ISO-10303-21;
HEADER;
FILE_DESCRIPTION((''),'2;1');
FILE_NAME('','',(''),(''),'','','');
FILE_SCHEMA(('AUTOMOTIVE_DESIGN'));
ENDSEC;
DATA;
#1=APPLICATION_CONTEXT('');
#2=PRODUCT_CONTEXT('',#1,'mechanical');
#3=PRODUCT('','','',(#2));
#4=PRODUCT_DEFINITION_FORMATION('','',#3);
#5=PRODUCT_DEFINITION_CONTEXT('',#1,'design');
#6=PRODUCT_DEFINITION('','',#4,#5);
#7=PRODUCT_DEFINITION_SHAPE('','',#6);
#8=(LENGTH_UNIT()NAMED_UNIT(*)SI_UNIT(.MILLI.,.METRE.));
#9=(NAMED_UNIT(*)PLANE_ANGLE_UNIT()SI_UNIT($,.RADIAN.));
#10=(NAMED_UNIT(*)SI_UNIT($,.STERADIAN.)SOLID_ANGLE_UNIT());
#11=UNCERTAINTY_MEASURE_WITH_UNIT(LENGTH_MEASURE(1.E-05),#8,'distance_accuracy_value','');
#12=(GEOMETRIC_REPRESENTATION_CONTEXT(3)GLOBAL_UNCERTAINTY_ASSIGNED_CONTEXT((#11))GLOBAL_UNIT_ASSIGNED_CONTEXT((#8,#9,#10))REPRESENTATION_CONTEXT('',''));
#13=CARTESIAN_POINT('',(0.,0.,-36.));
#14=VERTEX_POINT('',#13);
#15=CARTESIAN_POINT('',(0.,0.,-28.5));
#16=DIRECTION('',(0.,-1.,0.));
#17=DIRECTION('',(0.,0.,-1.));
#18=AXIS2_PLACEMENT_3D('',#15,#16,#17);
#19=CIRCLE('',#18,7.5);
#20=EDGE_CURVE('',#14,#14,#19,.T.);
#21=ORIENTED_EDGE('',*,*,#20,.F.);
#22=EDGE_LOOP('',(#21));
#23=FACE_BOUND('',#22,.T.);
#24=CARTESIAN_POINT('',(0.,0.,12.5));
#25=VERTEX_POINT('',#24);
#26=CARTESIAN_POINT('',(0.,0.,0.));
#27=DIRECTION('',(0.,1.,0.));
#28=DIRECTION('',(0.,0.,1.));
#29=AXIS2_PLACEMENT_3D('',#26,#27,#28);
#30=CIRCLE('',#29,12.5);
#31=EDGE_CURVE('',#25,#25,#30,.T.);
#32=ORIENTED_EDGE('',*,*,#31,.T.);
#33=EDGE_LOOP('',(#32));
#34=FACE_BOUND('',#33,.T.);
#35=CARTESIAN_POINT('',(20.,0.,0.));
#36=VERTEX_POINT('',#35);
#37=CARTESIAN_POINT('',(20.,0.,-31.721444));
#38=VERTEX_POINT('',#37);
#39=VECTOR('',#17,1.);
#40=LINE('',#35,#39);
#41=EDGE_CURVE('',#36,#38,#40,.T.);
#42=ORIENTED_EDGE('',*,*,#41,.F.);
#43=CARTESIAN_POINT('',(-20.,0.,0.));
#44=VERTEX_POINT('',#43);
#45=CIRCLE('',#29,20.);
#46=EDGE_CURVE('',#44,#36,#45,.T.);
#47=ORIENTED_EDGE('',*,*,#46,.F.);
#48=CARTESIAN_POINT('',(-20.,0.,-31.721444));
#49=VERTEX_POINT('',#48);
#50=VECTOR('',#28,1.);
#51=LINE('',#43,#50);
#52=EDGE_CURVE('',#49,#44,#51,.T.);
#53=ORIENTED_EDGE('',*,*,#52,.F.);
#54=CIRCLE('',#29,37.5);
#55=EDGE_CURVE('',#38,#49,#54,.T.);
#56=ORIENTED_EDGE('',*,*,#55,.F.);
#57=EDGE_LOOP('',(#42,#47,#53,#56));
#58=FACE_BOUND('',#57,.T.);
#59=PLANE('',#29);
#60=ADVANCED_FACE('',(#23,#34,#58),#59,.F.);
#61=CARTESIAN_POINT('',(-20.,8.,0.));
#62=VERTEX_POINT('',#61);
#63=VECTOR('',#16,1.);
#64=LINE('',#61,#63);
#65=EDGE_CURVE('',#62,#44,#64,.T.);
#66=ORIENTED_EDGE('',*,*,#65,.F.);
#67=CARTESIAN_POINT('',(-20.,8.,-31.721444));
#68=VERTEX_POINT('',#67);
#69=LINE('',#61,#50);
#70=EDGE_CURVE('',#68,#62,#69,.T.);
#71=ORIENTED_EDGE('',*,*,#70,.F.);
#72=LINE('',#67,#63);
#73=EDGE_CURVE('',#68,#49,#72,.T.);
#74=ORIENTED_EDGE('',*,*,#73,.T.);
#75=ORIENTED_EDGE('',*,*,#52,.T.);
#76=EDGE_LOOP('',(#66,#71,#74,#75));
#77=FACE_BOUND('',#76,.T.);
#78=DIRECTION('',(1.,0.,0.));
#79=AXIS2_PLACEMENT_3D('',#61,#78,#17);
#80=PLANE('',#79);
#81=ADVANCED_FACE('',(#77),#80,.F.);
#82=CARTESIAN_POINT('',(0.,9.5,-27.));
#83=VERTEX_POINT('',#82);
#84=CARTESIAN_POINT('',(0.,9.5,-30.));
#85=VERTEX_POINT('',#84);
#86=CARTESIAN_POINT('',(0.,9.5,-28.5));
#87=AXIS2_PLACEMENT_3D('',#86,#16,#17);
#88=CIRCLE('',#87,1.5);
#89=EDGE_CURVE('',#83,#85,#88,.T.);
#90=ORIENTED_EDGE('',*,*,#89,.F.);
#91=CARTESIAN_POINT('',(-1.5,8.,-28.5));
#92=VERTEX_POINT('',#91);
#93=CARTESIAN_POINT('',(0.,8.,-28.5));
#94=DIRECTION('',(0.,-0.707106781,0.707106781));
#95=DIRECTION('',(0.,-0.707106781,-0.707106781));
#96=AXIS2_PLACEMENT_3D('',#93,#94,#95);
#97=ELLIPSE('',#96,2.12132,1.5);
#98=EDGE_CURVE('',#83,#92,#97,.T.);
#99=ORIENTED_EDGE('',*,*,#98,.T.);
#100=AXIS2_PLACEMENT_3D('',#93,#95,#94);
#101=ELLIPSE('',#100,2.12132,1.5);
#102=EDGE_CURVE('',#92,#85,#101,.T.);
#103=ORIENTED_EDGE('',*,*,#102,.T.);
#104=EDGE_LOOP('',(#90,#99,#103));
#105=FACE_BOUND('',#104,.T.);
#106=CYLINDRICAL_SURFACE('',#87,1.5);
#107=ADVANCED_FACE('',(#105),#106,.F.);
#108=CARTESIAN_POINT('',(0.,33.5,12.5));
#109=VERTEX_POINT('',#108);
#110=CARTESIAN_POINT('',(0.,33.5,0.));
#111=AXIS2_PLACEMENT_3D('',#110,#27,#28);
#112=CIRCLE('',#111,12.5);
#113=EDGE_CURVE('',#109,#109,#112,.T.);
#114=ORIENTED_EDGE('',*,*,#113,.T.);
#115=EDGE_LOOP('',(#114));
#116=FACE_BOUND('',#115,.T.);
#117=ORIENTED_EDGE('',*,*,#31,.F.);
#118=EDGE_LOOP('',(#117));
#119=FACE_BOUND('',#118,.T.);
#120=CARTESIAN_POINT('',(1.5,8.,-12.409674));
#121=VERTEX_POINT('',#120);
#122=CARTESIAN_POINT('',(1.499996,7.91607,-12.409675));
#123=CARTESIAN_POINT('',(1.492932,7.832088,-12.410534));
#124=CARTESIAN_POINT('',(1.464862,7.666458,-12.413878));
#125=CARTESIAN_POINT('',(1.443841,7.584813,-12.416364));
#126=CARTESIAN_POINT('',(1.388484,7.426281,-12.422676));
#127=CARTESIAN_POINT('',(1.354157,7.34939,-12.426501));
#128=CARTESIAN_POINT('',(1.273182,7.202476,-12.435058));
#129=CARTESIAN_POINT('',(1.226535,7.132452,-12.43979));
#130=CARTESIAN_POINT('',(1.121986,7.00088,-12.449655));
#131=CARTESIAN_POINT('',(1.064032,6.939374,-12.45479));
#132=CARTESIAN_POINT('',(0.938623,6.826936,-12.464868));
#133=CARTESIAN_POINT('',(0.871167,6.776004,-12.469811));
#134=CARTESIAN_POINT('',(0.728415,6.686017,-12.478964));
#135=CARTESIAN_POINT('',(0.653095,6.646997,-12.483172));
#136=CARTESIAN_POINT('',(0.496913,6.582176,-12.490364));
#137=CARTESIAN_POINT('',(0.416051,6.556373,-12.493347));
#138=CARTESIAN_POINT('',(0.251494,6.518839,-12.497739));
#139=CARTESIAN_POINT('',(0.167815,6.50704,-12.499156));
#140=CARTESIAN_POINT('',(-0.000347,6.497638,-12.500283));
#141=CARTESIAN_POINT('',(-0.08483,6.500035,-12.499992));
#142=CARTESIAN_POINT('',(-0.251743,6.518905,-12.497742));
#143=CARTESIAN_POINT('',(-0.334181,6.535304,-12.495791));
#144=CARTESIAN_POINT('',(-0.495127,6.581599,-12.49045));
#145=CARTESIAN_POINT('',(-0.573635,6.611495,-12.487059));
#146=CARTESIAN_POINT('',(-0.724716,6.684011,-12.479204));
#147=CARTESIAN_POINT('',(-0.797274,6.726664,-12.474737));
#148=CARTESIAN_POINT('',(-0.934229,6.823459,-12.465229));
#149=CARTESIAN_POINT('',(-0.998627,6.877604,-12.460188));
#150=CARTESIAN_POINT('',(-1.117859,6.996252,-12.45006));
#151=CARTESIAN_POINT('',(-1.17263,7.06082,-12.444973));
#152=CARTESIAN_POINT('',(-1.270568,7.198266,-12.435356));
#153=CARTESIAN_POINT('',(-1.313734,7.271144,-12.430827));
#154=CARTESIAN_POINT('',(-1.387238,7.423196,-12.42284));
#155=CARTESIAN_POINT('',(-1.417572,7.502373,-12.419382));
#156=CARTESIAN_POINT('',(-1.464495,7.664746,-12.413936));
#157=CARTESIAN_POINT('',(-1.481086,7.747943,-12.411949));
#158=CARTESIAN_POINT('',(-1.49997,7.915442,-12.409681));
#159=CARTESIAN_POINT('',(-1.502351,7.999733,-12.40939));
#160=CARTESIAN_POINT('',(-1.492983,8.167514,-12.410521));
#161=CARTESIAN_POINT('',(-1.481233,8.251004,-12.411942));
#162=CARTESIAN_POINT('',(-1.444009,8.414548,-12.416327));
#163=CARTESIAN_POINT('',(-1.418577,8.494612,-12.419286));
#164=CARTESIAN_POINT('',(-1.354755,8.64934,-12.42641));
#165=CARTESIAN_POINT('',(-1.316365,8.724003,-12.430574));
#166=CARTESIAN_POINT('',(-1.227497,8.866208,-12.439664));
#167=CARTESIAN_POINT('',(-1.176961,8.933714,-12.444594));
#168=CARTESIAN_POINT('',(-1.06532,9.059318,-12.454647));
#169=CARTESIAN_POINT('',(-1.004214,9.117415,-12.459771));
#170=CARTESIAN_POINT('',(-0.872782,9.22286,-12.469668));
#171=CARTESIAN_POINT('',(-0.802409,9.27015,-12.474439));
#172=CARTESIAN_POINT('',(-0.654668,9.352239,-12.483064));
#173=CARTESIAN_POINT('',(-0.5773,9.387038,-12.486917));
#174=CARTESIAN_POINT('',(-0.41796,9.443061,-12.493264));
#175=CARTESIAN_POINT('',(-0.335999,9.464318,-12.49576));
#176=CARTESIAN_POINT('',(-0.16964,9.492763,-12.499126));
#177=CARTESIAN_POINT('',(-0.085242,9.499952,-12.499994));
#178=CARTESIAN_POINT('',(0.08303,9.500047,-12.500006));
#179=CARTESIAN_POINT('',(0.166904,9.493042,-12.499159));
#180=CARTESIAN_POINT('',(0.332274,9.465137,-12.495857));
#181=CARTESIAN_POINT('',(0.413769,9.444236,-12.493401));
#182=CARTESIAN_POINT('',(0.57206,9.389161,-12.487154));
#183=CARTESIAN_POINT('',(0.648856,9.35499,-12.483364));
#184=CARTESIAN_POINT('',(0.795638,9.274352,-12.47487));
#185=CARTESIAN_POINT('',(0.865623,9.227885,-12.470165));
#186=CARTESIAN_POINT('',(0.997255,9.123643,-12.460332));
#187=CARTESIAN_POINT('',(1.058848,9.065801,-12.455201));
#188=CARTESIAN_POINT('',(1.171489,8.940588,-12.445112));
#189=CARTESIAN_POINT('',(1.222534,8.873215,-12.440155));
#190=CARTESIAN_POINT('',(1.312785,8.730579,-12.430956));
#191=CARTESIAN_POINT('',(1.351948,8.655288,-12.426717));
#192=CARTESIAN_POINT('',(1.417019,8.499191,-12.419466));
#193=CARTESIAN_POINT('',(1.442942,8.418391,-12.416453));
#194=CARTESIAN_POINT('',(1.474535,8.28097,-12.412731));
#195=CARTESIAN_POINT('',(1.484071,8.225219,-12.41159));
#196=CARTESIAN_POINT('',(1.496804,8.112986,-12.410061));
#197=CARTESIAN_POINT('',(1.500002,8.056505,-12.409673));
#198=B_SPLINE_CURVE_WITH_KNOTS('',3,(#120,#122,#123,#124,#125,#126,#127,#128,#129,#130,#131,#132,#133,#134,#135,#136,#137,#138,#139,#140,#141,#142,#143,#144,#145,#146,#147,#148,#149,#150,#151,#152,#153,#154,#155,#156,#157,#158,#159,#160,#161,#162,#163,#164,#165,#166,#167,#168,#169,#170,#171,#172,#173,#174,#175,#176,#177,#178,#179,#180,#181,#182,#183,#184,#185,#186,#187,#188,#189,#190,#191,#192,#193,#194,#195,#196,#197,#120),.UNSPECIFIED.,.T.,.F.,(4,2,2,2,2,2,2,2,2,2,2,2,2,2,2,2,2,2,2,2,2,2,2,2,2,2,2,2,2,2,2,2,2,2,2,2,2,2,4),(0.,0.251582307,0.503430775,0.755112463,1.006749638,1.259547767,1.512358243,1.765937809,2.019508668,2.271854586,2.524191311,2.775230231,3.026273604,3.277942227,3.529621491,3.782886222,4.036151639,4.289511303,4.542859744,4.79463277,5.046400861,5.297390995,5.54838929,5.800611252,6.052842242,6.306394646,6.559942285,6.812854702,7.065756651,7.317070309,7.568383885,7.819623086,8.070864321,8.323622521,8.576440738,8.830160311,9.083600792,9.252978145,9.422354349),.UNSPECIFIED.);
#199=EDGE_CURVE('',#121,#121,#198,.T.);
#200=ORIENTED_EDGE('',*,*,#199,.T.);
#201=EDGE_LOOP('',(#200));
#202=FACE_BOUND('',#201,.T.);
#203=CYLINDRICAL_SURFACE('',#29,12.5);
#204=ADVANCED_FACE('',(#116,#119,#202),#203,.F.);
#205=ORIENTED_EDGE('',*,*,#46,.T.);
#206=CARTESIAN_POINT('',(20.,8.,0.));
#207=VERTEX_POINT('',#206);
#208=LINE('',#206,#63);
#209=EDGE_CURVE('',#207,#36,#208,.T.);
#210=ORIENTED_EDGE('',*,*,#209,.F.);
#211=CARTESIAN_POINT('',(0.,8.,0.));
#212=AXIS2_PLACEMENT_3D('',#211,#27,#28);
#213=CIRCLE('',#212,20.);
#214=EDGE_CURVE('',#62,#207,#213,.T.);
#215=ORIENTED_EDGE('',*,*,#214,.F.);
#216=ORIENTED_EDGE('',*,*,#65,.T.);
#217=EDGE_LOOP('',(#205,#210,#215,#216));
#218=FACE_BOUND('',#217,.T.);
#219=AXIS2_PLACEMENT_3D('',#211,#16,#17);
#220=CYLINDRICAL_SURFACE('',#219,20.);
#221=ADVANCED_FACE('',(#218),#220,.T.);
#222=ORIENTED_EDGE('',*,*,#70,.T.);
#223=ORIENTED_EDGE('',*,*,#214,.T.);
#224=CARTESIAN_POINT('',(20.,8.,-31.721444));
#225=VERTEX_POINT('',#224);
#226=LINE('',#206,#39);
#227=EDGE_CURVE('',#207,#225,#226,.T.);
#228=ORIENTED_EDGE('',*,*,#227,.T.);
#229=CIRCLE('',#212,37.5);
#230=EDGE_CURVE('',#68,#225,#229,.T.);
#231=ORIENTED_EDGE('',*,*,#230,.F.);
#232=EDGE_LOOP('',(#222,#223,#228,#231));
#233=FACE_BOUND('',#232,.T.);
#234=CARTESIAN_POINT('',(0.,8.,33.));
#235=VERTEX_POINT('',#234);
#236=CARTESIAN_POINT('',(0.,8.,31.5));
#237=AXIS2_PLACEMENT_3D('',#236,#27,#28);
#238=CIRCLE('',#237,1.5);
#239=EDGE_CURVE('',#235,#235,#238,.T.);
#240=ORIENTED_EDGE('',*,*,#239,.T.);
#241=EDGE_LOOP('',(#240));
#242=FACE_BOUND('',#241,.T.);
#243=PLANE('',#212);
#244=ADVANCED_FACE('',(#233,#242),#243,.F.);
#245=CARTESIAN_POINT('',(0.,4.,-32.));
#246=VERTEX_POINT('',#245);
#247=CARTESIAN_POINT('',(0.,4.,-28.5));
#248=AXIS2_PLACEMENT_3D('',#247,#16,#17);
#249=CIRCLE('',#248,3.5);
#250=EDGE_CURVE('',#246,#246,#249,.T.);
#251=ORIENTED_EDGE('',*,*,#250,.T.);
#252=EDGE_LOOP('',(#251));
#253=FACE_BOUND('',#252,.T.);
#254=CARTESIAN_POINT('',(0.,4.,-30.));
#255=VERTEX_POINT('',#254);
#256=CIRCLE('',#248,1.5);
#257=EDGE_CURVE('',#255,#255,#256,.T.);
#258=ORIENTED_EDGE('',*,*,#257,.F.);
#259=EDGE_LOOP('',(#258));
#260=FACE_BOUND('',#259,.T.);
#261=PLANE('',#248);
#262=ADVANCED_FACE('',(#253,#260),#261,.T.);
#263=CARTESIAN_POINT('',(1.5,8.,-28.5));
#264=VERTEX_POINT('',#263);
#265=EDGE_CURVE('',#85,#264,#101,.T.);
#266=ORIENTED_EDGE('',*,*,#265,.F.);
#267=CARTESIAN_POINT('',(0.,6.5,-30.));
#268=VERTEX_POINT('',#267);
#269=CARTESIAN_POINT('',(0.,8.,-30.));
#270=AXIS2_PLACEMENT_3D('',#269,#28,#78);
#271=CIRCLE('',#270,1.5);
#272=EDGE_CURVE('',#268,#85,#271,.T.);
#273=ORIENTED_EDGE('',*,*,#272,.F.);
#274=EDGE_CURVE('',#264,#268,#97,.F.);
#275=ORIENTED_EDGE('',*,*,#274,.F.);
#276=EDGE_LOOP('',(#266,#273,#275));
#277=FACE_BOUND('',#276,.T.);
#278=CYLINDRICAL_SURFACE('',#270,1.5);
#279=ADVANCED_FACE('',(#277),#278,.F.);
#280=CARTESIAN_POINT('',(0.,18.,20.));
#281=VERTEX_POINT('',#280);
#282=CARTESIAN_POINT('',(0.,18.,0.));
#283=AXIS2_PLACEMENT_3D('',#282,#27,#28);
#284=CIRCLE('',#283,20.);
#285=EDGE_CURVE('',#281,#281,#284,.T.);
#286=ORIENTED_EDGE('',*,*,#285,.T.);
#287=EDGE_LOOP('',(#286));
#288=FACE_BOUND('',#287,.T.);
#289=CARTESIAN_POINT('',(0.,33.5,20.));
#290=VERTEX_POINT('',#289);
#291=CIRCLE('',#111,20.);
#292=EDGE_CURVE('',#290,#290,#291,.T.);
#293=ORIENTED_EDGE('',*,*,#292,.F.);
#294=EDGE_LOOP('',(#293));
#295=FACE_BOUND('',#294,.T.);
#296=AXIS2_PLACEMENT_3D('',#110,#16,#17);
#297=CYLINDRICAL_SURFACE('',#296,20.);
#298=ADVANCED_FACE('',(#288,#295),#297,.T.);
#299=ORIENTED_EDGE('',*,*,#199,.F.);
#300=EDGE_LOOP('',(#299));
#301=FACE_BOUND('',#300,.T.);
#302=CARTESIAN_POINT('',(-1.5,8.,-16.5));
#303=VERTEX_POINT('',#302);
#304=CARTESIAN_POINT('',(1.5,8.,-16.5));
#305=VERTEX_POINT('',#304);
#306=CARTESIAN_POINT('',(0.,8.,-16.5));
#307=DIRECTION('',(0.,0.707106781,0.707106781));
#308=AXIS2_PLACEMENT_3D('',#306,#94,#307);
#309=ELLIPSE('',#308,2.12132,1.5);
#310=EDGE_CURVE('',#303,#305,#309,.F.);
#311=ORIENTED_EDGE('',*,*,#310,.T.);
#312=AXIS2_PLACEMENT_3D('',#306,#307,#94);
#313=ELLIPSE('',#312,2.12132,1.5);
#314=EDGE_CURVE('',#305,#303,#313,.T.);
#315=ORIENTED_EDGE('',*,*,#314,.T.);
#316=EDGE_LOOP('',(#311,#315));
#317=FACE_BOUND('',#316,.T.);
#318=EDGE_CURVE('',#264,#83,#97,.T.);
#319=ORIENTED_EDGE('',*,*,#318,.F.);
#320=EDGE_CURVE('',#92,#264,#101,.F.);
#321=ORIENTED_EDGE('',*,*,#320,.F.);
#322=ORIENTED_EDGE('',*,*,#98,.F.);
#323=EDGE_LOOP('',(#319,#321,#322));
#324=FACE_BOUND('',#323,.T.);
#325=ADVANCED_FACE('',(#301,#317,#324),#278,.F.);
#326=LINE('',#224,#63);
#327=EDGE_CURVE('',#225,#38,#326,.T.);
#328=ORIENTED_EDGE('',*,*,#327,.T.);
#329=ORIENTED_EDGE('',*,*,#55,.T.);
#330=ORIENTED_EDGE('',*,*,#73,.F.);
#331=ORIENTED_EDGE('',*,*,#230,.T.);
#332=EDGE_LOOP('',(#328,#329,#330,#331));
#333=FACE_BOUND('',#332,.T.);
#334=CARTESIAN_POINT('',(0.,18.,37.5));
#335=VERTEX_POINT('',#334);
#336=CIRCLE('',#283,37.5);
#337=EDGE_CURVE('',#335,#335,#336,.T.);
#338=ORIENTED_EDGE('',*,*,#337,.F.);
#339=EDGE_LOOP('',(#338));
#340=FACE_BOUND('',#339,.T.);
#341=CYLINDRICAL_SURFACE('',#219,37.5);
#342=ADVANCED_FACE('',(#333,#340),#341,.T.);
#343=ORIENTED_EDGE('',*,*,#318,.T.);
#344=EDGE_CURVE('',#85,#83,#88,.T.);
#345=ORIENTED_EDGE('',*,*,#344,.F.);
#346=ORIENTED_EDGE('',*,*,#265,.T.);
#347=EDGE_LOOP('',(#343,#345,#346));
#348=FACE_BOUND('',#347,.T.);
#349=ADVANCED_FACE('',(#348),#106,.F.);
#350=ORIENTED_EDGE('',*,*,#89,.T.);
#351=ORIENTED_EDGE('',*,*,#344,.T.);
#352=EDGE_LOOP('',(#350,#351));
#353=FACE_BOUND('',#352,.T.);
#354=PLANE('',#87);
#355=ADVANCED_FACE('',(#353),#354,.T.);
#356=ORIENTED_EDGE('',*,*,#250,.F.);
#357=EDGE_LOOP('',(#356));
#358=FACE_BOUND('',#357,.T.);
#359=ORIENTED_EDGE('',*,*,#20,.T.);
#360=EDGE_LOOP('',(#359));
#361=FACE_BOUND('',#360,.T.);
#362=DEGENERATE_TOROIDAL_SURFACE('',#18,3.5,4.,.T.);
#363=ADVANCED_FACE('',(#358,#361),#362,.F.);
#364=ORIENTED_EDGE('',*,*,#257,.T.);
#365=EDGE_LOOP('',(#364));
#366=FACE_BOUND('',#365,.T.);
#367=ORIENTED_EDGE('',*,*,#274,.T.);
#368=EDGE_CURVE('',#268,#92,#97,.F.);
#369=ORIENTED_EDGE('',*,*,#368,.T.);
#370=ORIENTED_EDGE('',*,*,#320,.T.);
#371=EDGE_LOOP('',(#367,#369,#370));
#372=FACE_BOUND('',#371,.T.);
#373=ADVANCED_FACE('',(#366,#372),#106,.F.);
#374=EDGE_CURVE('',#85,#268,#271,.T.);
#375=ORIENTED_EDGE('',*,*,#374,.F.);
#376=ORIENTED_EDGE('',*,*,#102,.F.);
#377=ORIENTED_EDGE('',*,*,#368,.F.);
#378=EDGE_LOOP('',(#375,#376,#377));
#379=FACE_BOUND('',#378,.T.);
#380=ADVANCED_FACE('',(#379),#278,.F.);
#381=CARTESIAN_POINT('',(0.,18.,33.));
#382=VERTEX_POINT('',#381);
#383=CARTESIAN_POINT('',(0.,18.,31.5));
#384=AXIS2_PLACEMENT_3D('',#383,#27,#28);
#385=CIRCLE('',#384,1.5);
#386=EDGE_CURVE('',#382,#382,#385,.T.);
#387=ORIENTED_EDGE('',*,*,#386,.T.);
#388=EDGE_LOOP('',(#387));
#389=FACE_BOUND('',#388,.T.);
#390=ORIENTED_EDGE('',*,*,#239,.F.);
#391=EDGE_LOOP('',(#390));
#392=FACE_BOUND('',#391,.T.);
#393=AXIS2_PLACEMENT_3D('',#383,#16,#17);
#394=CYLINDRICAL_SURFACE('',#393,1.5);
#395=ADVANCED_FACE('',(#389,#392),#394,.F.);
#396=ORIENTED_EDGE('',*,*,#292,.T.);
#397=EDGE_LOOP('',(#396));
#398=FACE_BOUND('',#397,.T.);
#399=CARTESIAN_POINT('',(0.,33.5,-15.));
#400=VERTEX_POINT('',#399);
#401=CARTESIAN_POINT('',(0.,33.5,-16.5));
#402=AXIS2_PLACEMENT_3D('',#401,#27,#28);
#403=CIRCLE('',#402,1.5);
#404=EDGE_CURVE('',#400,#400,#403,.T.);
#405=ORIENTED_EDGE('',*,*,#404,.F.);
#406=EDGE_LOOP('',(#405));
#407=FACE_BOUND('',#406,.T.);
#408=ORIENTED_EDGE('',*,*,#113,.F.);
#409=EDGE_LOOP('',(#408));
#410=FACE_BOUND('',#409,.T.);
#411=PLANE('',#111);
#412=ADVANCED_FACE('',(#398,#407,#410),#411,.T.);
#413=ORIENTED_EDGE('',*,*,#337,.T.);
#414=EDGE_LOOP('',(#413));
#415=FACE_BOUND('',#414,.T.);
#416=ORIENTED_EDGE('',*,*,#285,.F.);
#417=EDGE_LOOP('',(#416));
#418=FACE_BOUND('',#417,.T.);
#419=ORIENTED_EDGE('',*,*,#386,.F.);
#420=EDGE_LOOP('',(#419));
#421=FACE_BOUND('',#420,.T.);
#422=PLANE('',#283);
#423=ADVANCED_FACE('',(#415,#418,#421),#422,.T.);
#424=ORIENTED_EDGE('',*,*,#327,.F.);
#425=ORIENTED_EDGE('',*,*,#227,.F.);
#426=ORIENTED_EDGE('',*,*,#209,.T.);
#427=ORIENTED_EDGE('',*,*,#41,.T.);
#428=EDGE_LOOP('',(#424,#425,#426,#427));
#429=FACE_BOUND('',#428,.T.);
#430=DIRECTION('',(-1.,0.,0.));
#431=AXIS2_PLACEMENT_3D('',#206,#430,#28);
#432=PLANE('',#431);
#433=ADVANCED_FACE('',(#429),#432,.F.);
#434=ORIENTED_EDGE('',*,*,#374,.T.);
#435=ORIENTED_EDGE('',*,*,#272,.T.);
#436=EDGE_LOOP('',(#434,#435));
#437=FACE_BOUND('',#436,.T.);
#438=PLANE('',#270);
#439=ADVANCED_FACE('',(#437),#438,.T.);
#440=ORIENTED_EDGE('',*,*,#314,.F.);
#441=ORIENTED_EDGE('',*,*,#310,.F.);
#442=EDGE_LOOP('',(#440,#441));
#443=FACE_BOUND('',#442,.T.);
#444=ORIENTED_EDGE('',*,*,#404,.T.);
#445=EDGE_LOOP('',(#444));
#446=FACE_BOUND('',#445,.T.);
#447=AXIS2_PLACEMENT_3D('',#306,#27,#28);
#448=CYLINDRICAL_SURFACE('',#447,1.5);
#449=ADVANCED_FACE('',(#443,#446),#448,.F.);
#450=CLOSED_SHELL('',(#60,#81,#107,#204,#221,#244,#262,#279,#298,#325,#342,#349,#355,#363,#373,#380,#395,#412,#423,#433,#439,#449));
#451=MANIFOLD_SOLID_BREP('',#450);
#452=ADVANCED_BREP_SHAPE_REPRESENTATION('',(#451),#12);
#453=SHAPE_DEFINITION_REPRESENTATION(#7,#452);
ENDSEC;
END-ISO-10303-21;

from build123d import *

# Parameters (mm, degrees)
EXTRUDE_1_DEPTH     = 8
SKETCH_2_R          = 37.5
SKETCH_2_R_2        = 1.5
EXTRUDE_2_DEPTH     = 10
SKETCH_3_R          = 20
EXTRUDE_3_DEPTH     = 15.5
SKETCH_4_R          = 12.5
CUT_EXTRUDE_1_DEPTH = 63.727585638
SKETCH_5_R          = 7.5
CUT_EXTRUDE_2_DEPTH = 4
FILLET_1_R          = 4
SKETCH_6_R          = 1.5
CUT_EXTRUDE_3_DEPTH = 5.5
SKETCH_9_R          = 1.5
CUT_EXTRUDE_4_DEPTH = 30
SKETCH_10_R         = 1.5
CUT_EXTRUDE_5_DEPTH = 25.5


with BuildPart() as part:
    # 草图1 → 凸台-拉伸1 (new body)
    with BuildSketch(Plane(origin=(0, 0, 0), x_dir=(1, 0, 0), z_dir=(0, 1, 0))):
        with BuildLine():
            Line((-20, 0), (-20, 31.721443851))
            ThreePointArc((-20, 31.721443851), (0, 37.5), (20, 31.721443851))
            Line((20, 31.721443851), (20, 0))
            ThreePointArc((20, 0), (0, -20), (-20, 0))
        make_face()
    extrude(amount=EXTRUDE_1_DEPTH)

    # 草图2 → 凸台-拉伸2 (add)
    with BuildSketch(Plane(origin=(0, 8, 0), x_dir=(1, 0, 0), z_dir=(0, 1, 0))):
        with Locations(Location((0, 0, 0), (0, 0, 122.230952636))):
            Circle(SKETCH_2_R)
        with Locations(Location((0, -31.5, 0), (0, 0, 270))):
            Circle(SKETCH_2_R_2, mode=Mode.SUBTRACT)
    extrude(amount=EXTRUDE_2_DEPTH)

    # 草图3 → 凸台-拉伸3 (add)
    with BuildSketch(Plane(origin=(0, 18, 0), x_dir=(1, 0, 0), z_dir=(0, 1, 0))):
        with Locations(Location((0, 0, 0), (0, 0, 270))):
            Circle(SKETCH_3_R)
    extrude(amount=EXTRUDE_3_DEPTH)

    # 草图4 → 切除-拉伸1 (cut, through all)
    with BuildSketch(Plane(origin=(0, 33.5, 0), x_dir=(1, 0, 0), z_dir=(0, 1, 0))):
        with Locations(Location((0, 0, 0), (0, 0, 270))):
            Circle(SKETCH_4_R)
    extrude(amount=-CUT_EXTRUDE_1_DEPTH, mode=Mode.SUBTRACT)

    # 草图5 → 切除-拉伸2 (cut)
    with BuildSketch(Plane.XZ):
        with Locations(Location((0, -28.5, 0), (0, 0, 270))):
            Circle(SKETCH_5_R)
    extrude(amount=-CUT_EXTRUDE_2_DEPTH, mode=Mode.SUBTRACT)

    # 圆角1
    fillet_1_edges = [part.edges().sort_by_distance(p)[0] for p in [
        (0, 4, -21),
    ]]
    fillet(fillet_1_edges, radius=FILLET_1_R - 0.0001)  # a hair under: the kernel refuses the full size

    # 草图6 → 切除-拉伸3 (cut)
    with BuildSketch(Plane.XZ.offset(-4)):
        with Locations(Location((0, -28.5, 0), (0, 0, 270))):
            Circle(SKETCH_6_R)
    extrude(amount=-CUT_EXTRUDE_3_DEPTH, mode=Mode.SUBTRACT)

    # 草图9 → 切除-拉伸4 (cut)
    with BuildSketch(Plane.XY):
        with Locations((0, 8)):
            Circle(SKETCH_9_R)
    extrude(amount=-CUT_EXTRUDE_4_DEPTH, mode=Mode.SUBTRACT)

    # 草图10 → 切除-拉伸5 (cut)
    with BuildSketch(Plane(origin=(0, 33.5, 0), x_dir=(1, 0, 0), z_dir=(0, 1, 0))):
        with Locations(Location((0, 16.5, 0), (0, 0, 270))):
            Circle(SKETCH_10_R)
    extrude(amount=-CUT_EXTRUDE_5_DEPTH, mode=Mode.SUBTRACT)


solid = part.part
